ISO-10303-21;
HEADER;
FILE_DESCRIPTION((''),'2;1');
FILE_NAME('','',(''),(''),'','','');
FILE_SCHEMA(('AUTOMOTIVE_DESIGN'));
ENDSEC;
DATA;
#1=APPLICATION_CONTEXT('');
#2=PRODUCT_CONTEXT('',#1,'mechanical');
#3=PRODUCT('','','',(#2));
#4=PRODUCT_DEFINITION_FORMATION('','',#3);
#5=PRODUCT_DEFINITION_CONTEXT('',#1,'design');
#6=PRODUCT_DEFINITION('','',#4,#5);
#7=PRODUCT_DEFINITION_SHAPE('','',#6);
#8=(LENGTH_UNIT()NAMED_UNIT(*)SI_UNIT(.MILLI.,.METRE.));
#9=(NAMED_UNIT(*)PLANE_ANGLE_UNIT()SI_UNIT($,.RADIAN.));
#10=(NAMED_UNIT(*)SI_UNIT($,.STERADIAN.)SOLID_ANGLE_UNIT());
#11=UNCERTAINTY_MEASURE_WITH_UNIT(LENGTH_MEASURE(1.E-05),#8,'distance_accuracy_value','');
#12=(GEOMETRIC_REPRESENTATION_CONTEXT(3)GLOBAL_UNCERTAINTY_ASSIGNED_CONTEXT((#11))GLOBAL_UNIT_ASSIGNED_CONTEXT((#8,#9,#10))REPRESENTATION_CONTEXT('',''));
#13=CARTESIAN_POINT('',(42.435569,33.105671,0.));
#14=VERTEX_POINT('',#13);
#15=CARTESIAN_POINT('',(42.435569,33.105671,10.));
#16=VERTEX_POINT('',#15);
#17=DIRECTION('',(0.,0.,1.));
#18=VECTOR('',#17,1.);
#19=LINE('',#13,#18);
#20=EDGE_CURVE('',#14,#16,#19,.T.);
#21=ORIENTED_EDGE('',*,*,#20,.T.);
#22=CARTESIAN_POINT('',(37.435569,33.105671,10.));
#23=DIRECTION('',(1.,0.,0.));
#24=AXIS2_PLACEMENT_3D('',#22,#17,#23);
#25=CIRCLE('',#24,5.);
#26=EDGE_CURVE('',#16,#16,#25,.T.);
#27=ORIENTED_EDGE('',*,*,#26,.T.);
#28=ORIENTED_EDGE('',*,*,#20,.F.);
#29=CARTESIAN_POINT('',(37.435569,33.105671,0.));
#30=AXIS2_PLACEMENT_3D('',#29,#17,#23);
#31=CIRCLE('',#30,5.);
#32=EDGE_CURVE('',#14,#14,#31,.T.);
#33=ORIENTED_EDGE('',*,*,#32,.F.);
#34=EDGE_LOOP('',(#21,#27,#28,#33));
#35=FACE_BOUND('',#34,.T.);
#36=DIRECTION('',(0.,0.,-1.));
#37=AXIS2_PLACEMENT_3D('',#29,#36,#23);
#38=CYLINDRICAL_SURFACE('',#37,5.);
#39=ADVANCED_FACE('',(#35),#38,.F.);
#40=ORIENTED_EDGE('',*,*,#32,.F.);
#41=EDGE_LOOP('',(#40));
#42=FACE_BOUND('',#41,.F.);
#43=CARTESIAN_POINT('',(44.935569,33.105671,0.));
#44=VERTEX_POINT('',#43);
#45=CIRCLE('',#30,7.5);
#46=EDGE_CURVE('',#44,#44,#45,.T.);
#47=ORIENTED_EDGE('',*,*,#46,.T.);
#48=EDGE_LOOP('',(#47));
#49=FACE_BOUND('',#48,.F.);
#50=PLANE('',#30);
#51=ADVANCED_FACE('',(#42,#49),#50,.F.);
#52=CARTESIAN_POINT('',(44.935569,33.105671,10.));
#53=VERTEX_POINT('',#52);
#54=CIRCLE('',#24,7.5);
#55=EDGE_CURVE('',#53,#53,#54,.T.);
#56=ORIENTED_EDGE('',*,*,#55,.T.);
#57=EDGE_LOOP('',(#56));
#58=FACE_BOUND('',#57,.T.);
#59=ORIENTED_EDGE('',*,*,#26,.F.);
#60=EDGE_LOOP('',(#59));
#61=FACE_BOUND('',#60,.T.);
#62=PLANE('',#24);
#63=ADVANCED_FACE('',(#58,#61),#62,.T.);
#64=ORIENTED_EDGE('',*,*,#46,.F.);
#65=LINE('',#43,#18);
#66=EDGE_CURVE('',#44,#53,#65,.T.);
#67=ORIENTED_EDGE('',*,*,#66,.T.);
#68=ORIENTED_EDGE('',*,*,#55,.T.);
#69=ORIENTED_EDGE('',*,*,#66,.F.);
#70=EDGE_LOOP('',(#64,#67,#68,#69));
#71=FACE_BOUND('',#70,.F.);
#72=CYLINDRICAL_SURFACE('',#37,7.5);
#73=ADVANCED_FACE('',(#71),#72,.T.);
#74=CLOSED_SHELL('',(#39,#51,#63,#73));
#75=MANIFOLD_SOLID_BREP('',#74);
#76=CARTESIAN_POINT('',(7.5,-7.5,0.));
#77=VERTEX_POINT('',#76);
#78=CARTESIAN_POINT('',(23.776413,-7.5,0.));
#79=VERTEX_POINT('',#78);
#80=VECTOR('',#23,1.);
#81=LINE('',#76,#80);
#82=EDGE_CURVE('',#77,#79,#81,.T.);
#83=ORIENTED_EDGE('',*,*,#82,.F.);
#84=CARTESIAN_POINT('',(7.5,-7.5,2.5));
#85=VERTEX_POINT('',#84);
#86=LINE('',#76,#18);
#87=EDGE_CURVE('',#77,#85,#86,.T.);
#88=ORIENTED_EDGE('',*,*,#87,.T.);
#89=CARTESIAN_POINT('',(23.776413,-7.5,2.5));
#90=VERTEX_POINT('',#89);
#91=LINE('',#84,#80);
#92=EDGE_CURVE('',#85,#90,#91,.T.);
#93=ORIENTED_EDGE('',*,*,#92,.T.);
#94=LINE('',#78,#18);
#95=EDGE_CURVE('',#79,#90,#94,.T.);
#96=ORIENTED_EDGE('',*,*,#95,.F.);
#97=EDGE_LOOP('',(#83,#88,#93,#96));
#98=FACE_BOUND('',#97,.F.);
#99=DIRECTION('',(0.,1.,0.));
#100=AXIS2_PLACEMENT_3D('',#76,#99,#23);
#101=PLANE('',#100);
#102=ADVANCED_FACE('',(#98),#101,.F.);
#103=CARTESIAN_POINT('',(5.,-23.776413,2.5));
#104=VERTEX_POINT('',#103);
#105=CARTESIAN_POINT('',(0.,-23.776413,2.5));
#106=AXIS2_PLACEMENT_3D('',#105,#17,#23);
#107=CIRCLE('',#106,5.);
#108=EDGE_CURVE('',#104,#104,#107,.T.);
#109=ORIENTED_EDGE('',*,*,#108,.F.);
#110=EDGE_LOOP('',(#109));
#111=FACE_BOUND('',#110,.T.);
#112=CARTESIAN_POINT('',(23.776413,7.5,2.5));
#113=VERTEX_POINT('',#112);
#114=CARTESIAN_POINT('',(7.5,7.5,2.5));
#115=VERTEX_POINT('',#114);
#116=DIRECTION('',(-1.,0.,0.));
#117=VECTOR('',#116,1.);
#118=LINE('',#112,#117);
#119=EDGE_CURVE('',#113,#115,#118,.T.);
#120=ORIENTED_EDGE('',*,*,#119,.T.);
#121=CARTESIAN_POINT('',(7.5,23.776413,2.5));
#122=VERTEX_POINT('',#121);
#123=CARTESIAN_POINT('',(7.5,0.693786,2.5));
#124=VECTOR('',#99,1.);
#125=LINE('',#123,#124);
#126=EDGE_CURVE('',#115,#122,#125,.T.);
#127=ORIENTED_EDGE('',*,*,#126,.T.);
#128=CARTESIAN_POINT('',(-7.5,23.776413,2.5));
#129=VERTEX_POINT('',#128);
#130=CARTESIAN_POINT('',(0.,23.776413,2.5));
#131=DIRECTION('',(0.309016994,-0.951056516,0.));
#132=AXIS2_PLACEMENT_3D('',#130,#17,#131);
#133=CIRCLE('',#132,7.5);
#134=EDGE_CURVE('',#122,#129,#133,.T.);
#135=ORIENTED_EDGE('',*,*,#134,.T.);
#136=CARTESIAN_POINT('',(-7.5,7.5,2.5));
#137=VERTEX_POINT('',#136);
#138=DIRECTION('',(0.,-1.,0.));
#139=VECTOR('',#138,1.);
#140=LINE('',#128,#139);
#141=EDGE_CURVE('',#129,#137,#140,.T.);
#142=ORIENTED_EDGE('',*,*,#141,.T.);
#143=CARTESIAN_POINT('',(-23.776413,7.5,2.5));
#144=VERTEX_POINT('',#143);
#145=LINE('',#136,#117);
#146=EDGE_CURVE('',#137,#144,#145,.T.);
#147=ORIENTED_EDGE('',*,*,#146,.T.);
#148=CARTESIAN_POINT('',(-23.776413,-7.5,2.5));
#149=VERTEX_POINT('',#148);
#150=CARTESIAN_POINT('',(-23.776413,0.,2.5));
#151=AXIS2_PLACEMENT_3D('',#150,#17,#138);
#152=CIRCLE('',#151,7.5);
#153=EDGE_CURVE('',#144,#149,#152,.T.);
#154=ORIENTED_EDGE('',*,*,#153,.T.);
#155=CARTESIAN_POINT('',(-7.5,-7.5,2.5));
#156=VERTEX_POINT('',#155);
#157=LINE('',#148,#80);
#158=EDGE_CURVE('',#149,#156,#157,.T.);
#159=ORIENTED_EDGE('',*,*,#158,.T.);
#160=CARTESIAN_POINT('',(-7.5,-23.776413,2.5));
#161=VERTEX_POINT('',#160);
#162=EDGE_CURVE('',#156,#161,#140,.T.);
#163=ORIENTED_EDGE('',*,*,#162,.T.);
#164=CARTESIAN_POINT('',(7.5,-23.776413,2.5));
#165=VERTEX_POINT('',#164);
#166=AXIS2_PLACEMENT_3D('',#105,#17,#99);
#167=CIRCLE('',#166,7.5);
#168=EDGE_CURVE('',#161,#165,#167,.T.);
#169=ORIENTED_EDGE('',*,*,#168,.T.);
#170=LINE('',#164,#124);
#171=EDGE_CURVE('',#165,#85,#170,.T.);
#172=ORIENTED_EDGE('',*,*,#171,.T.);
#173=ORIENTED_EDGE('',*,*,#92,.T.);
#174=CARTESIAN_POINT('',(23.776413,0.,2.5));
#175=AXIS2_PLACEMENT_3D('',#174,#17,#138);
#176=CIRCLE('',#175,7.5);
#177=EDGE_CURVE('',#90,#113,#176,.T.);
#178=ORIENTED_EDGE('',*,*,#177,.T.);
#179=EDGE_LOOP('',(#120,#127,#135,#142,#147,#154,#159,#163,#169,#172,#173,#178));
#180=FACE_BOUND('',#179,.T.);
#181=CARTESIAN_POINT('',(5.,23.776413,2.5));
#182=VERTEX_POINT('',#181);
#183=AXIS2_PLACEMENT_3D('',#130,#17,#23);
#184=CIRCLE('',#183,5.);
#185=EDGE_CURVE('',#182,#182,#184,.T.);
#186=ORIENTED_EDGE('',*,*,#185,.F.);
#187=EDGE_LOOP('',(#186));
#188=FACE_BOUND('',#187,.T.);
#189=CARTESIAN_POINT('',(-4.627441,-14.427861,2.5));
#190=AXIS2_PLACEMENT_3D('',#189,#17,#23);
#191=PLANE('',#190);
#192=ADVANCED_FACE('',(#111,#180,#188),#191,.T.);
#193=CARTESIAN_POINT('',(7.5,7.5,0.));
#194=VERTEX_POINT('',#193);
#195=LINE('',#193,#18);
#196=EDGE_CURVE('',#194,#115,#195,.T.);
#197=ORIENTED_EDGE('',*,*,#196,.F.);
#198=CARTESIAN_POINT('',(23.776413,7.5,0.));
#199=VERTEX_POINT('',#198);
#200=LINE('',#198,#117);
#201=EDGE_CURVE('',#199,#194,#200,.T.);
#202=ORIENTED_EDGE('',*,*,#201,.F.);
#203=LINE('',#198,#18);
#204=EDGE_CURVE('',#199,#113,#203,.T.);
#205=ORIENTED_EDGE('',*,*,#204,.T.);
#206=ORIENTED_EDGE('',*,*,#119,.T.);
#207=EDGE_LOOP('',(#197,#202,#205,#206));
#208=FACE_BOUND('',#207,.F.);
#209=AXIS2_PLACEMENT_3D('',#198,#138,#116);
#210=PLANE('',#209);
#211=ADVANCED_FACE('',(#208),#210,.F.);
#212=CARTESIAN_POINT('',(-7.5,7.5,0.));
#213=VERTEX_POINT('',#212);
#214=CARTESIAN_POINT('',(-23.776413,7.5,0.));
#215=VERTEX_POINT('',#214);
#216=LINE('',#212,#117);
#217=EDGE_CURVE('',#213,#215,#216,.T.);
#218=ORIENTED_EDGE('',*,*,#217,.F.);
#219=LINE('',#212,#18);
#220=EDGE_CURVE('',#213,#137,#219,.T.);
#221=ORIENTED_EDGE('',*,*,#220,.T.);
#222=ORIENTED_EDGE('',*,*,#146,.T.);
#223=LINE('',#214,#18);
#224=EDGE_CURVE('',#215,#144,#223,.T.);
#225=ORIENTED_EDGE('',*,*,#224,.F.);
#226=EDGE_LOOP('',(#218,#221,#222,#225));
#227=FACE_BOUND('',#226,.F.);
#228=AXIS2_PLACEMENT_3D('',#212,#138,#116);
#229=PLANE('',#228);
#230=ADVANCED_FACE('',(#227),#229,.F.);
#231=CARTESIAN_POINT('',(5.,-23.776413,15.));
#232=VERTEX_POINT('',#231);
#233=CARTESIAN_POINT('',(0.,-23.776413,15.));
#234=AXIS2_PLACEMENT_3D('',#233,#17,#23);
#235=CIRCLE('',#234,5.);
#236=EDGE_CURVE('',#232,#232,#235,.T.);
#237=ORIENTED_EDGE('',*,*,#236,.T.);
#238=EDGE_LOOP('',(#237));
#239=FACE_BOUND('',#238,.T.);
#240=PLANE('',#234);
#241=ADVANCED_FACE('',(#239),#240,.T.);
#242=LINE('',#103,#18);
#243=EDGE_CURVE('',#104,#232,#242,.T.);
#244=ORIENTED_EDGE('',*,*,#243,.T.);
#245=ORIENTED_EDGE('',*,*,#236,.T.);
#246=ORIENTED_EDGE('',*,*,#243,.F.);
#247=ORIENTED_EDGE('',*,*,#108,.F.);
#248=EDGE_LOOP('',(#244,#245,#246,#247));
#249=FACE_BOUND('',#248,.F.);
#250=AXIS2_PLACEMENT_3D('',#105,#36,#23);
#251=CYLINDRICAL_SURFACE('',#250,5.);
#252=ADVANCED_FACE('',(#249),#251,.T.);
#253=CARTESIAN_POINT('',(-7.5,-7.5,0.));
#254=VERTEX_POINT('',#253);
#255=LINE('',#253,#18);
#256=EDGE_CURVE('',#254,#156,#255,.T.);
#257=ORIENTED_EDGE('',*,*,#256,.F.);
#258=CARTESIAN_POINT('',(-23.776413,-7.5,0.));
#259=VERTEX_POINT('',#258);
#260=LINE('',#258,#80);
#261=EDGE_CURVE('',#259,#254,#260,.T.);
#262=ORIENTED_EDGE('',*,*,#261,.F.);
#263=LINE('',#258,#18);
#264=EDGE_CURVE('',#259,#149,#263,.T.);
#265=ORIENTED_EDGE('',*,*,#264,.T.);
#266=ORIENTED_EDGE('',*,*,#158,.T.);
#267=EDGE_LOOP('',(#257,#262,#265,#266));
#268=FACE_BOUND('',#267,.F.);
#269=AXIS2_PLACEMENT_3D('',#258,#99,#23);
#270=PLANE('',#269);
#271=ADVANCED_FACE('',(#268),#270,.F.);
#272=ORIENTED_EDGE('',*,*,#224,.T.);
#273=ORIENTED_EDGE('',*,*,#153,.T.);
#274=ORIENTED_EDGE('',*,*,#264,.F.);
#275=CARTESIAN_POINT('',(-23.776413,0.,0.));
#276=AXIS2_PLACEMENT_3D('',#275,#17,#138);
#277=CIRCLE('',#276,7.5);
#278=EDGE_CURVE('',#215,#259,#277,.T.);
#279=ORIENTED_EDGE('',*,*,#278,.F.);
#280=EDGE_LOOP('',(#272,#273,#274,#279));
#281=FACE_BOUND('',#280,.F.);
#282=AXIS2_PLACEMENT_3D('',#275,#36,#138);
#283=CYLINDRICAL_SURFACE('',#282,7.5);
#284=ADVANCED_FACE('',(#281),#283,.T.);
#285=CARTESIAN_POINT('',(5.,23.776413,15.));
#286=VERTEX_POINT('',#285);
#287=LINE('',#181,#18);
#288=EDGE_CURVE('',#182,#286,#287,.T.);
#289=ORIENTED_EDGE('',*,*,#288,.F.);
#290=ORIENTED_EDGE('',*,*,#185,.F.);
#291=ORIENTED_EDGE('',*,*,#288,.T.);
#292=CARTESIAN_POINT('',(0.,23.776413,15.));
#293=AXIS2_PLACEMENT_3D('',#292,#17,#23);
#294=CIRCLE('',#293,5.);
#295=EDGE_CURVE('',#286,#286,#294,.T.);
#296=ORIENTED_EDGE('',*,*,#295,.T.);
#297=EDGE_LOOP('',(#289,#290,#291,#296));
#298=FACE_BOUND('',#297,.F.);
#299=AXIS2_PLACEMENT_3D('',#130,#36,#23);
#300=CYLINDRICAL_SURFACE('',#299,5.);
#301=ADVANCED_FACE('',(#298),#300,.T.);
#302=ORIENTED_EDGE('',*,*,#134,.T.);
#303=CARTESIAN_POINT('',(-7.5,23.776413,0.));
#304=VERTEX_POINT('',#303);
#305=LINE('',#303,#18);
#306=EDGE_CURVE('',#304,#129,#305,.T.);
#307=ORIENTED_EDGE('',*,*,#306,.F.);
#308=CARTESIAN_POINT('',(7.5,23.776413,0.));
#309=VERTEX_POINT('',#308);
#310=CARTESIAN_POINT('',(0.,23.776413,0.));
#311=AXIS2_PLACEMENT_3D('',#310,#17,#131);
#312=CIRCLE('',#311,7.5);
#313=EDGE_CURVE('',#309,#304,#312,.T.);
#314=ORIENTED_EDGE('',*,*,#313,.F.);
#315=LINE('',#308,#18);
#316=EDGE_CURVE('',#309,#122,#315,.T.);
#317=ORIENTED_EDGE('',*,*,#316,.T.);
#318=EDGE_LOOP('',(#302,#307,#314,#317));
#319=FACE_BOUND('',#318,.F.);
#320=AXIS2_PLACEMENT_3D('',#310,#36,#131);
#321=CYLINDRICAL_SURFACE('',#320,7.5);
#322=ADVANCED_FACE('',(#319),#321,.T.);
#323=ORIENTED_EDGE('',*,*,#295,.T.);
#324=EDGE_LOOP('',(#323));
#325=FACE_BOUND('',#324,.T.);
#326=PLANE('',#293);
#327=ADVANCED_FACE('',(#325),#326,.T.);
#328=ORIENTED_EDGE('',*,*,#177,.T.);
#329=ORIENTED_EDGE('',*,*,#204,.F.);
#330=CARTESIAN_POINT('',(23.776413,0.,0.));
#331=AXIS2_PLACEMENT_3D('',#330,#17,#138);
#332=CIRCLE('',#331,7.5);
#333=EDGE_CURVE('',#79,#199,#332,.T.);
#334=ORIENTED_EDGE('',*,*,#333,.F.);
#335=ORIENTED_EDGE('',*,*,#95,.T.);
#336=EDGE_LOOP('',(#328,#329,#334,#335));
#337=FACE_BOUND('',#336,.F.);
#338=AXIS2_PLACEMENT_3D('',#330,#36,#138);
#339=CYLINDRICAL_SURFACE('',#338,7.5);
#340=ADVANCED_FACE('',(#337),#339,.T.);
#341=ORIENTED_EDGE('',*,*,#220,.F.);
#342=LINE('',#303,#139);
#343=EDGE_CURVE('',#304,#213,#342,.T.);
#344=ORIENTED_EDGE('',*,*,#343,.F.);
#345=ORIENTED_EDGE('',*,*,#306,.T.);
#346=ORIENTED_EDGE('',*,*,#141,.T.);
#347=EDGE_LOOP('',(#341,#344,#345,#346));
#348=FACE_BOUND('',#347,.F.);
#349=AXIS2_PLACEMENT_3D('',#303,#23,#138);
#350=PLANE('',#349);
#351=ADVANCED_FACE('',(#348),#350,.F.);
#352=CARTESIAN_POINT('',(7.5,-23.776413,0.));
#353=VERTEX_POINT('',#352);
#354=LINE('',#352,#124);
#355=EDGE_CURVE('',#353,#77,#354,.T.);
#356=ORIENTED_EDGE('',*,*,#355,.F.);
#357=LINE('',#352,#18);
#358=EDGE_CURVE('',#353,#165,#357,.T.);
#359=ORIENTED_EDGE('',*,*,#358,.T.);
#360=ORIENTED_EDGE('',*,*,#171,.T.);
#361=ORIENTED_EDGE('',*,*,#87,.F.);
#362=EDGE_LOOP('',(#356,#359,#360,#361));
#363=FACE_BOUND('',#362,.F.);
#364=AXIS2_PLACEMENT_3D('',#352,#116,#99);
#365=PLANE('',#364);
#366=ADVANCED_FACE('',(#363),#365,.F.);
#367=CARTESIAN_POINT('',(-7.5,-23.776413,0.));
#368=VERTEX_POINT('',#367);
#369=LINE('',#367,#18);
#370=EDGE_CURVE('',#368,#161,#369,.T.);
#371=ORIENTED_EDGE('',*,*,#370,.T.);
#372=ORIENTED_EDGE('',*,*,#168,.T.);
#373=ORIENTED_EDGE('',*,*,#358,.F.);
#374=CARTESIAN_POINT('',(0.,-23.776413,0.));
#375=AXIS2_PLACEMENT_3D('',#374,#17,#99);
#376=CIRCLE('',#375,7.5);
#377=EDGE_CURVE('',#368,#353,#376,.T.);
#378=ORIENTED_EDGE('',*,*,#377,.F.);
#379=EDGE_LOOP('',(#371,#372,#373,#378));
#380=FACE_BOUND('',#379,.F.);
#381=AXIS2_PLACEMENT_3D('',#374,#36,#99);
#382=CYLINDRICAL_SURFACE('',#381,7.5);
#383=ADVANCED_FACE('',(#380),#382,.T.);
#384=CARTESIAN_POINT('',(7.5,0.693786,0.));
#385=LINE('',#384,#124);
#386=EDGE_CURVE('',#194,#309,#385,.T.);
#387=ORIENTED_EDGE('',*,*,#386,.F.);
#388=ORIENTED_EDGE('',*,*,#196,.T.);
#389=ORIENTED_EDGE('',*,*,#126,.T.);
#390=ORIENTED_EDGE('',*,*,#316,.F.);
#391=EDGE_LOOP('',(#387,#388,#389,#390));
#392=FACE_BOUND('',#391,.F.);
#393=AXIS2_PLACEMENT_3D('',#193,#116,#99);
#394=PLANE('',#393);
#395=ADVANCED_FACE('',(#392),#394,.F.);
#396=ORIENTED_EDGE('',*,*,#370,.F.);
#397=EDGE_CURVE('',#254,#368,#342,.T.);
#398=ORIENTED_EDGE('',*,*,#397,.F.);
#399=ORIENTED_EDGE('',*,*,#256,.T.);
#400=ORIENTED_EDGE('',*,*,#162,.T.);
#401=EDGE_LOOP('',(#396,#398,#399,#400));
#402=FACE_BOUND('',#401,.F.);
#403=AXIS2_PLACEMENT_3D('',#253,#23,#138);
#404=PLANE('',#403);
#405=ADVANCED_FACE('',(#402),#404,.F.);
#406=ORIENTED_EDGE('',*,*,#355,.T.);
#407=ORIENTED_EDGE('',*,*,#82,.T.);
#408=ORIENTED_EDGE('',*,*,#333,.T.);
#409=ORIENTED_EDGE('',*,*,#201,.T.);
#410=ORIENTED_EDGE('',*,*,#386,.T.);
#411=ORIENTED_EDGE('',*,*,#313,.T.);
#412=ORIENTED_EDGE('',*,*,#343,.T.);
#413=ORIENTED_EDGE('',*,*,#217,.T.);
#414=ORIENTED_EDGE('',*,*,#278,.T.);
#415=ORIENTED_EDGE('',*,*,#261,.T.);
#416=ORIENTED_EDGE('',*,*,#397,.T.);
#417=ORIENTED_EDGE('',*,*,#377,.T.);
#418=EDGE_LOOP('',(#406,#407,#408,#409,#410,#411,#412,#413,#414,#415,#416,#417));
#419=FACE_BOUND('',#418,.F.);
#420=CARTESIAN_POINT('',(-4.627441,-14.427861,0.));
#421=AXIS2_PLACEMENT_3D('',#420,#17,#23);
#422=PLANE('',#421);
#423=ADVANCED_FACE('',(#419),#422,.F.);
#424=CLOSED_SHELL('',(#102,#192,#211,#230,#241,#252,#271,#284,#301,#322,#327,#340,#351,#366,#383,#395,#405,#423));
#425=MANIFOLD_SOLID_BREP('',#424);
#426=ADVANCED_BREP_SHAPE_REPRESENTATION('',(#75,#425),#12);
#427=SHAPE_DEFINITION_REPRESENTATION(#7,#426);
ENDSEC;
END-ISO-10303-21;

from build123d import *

# Parameters (mm, degrees)
F0_W     = 7.5
F0_H     = 15
F1_DEPTH = 2.5
F2_R     = 5
F3_DEPTH = 12.5
F4_R     = 7.5
F4_R_2   = 5
F5_DEPTH = 10


# Not quite as in the source:
# - a feature names something its author has since deleted; it is built from what else it names


with BuildPart() as f1:
    # F0 (on Top) → F1 (new body)
    with BuildSketch(Plane.XY):
        with BuildLine():
            Line((0, -16.2764129074), (0, -7.5))
            Line((0, -7.5), (-7.5, -7.5))
            Line((-7.5, -7.5), (-7.5, -23.7764129074))
            ThreePointArc((-7.5, -23.7764129074), (-5.3033008589, -18.4731120485), (0, -16.2764129074))
        make_face()
        with Locations((-3.75, 0)):
            Rectangle(F0_W, F0_H)
        with BuildLine():
            Line((0, 7.5), (0, 16.2764129074))
            ThreePointArc((0, 16.2764129074), (-5.3033008589, 18.4731120485), (-7.5, 23.7764129074))
            Line((-7.5, 23.7764129074), (-7.5, 7.5))
            Line((-7.5, 7.5), (0, 7.5))
        make_face()
        with BuildLine():
            ThreePointArc((2.3176274578, 16.6434890352), (1.1732584878, 16.3687503529), (0, 16.2764129074))
            Line((0, 16.2764129074), (0, 7.5))
            Line((0, 7.5), (5.2885271376, 7.5))
            Line((5.2885271376, 7.5), (2.3176274578, 16.6434890352))
        make_face()
        with BuildLine():
            Line((7.5, -7.5), (5.2885271376, -7.5))
            Line((5.2885271376, -7.5), (2.3176274578, -16.6434890352))
            ThreePointArc((2.3176274578, -16.6434890352), (6.0676274578, -19.3680235152), (7.5, -23.7764129074))
            Line((7.5, -23.7764129074), (7.5, -7.5))
        make_face()
        with BuildLine():
            Line((0, -23.7764129074), (0, -16.2764129074))
            ThreePointArc((0, -16.2764129074), (-5.3033008589, -18.4731120485), (-7.5, -23.7764129074))
            ThreePointArc((-7.5, -23.7764129074), (0, -31.2764129074), (7.5, -23.7764129074))
            ThreePointArc((7.5, -23.7764129074), (6.0676274578, -19.3680235152), (2.3176274578, -16.6434890352))
            Line((2.3176274578, -16.6434890352), (0, -23.7764129074))
        make_face()
        with BuildLine():
            ThreePointArc((2.3176274578, -16.6434890352), (1.1732584878, -16.3687503529), (0, -16.2764129074))
            Line((0, -16.2764129074), (0, -23.7764129074))
            Line((0, -23.7764129074), (2.3176274578, -16.6434890352))
        make_face()
        with BuildLine():
            ThreePointArc((7.5, 23.7764129074), (6.0676274578, 19.3680235152), (2.3176274578, 16.6434890352))
            Line((2.3176274578, 16.6434890352), (5.2885271376, 7.5))
            Line((5.2885271376, 7.5), (7.5, 7.5))
            Line((7.5, 7.5), (7.5, 23.7764129074))
        make_face()
        with BuildLine():
            Line((0, 16.2764129074), (0, 23.7764129074))
            Line((0, 23.7764129074), (2.3176274578, 16.6434890352))
            ThreePointArc((2.3176274578, 16.6434890352), (6.0676274578, 19.3680235152), (7.5, 23.7764129074))
            ThreePointArc((7.5, 23.7764129074), (0, 31.2764129074), (-7.5, 23.7764129074))
            ThreePointArc((-7.5, 23.7764129074), (-5.3033008589, 18.4731120485), (0, 16.2764129074))
        make_face()
        with BuildLine():
            Line((2.3176274578, 16.6434890352), (0, 23.7764129074))
            Line((0, 23.7764129074), (0, 16.2764129074))
            ThreePointArc((0, 16.2764129074), (1.1732584878, 16.3687503529), (2.3176274578, 16.6434890352))
        make_face()
        with BuildLine():
            Line((5.2885271376, -7.5), (0, -7.5))
            Line((0, -7.5), (0, -16.2764129074))
            ThreePointArc((0, -16.2764129074), (1.1732584878, -16.3687503529), (2.3176274578, -16.6434890352))
            Line((2.3176274578, -16.6434890352), (5.2885271376, -7.5))
        make_face()
        Polygon((7.5, -0.6937863786), (5.2885271376, -7.5), (7.5, -7.5), align=None)
        Polygon((7.5, 7.5), (5.2885271376, 7.5), (7.5, 0.6937863786), align=None)
        with BuildLine():
            Line((23.7764129074, 7.5), (7.5, 7.5))
            Line((7.5, 7.5), (7.5, 0.6937863786))
            Line((7.5, 0.6937863786), (7.7254248594, 0))
            Line((7.7254248594, 0), (7.5, -0.6937863786))
            Line((7.5, -0.6937863786), (7.5, -7.5))
            Line((7.5, -7.5), (23.7764129074, -7.5))
            ThreePointArc((23.7764129074, -7.5), (16.2764129074, 0), (23.7764129074, 7.5))
        make_face()
        Polygon((5.2885271376, 7.5), (0, 7.5), (0, -7.5), (5.2885271376, -7.5), (7.5, -0.6937863786), (7.5, 0.6937863786), align=None)
        Polygon((7.7254248594, 0), (7.5, 0.6937863786), (7.5, -0.6937863786), align=None)
        with BuildLine():
            ThreePointArc((31.2764129074, 0), (29.0797137663, 5.3033008589), (23.7764129074, 7.5))
            ThreePointArc((23.7764129074, 7.5), (16.2764129074, 0), (23.7764129074, -7.5))
            ThreePointArc((23.7764129074, -7.5), (29.0797137663, -5.3033008589), (31.2764129074, 0))
        make_face()
        with BuildLine():
            Line((-7.5, -7.5), (-7.5, 7.5))
            Line((-7.5, 7.5), (-23.7764129074, 7.5))
            ThreePointArc((-23.7764129074, 7.5), (-18.4731120485, 5.3033008589), (-16.2764129074, 0))
            ThreePointArc((-16.2764129074, 0), (-18.4731120485, -5.3033008589), (-23.7764129074, -7.5))
            Line((-23.7764129074, -7.5), (-7.5, -7.5))
        make_face()
        with BuildLine():
            ThreePointArc((-16.2764129074, 0), (-18.4731120485, 5.3033008589), (-23.7764129074, 7.5))
            ThreePointArc((-23.7764129074, 7.5), (-31.2764129074, 0), (-23.7764129074, -7.5))
            ThreePointArc((-23.7764129074, -7.5), (-18.4731120485, -5.3033008589), (-16.2764129074, 0))
        make_face()
    extrude(amount=F1_DEPTH)

    # F2 (on face) → F3 (join)
    with BuildSketch(Plane.XY.offset(2.5)):
        with Locations((0, 23.7764129074)):
            Circle(F2_R)
        with Locations((0, -23.7764129074)):
            Circle(F2_R)
    extrude(amount=F3_DEPTH)


with BuildPart() as f5:
    # F4 (on Top) → F5 (new body)
    with BuildSketch(Plane.XY):
        with Locations((37.4355688691, 33.1056714058)):
            Circle(F4_R)
        with Locations((37.4355688691, 33.1056714058)):
            Circle(F4_R_2, mode=Mode.SUBTRACT)
    extrude(amount=F5_DEPTH)


solid = Compound([f1.part, f5.part])
